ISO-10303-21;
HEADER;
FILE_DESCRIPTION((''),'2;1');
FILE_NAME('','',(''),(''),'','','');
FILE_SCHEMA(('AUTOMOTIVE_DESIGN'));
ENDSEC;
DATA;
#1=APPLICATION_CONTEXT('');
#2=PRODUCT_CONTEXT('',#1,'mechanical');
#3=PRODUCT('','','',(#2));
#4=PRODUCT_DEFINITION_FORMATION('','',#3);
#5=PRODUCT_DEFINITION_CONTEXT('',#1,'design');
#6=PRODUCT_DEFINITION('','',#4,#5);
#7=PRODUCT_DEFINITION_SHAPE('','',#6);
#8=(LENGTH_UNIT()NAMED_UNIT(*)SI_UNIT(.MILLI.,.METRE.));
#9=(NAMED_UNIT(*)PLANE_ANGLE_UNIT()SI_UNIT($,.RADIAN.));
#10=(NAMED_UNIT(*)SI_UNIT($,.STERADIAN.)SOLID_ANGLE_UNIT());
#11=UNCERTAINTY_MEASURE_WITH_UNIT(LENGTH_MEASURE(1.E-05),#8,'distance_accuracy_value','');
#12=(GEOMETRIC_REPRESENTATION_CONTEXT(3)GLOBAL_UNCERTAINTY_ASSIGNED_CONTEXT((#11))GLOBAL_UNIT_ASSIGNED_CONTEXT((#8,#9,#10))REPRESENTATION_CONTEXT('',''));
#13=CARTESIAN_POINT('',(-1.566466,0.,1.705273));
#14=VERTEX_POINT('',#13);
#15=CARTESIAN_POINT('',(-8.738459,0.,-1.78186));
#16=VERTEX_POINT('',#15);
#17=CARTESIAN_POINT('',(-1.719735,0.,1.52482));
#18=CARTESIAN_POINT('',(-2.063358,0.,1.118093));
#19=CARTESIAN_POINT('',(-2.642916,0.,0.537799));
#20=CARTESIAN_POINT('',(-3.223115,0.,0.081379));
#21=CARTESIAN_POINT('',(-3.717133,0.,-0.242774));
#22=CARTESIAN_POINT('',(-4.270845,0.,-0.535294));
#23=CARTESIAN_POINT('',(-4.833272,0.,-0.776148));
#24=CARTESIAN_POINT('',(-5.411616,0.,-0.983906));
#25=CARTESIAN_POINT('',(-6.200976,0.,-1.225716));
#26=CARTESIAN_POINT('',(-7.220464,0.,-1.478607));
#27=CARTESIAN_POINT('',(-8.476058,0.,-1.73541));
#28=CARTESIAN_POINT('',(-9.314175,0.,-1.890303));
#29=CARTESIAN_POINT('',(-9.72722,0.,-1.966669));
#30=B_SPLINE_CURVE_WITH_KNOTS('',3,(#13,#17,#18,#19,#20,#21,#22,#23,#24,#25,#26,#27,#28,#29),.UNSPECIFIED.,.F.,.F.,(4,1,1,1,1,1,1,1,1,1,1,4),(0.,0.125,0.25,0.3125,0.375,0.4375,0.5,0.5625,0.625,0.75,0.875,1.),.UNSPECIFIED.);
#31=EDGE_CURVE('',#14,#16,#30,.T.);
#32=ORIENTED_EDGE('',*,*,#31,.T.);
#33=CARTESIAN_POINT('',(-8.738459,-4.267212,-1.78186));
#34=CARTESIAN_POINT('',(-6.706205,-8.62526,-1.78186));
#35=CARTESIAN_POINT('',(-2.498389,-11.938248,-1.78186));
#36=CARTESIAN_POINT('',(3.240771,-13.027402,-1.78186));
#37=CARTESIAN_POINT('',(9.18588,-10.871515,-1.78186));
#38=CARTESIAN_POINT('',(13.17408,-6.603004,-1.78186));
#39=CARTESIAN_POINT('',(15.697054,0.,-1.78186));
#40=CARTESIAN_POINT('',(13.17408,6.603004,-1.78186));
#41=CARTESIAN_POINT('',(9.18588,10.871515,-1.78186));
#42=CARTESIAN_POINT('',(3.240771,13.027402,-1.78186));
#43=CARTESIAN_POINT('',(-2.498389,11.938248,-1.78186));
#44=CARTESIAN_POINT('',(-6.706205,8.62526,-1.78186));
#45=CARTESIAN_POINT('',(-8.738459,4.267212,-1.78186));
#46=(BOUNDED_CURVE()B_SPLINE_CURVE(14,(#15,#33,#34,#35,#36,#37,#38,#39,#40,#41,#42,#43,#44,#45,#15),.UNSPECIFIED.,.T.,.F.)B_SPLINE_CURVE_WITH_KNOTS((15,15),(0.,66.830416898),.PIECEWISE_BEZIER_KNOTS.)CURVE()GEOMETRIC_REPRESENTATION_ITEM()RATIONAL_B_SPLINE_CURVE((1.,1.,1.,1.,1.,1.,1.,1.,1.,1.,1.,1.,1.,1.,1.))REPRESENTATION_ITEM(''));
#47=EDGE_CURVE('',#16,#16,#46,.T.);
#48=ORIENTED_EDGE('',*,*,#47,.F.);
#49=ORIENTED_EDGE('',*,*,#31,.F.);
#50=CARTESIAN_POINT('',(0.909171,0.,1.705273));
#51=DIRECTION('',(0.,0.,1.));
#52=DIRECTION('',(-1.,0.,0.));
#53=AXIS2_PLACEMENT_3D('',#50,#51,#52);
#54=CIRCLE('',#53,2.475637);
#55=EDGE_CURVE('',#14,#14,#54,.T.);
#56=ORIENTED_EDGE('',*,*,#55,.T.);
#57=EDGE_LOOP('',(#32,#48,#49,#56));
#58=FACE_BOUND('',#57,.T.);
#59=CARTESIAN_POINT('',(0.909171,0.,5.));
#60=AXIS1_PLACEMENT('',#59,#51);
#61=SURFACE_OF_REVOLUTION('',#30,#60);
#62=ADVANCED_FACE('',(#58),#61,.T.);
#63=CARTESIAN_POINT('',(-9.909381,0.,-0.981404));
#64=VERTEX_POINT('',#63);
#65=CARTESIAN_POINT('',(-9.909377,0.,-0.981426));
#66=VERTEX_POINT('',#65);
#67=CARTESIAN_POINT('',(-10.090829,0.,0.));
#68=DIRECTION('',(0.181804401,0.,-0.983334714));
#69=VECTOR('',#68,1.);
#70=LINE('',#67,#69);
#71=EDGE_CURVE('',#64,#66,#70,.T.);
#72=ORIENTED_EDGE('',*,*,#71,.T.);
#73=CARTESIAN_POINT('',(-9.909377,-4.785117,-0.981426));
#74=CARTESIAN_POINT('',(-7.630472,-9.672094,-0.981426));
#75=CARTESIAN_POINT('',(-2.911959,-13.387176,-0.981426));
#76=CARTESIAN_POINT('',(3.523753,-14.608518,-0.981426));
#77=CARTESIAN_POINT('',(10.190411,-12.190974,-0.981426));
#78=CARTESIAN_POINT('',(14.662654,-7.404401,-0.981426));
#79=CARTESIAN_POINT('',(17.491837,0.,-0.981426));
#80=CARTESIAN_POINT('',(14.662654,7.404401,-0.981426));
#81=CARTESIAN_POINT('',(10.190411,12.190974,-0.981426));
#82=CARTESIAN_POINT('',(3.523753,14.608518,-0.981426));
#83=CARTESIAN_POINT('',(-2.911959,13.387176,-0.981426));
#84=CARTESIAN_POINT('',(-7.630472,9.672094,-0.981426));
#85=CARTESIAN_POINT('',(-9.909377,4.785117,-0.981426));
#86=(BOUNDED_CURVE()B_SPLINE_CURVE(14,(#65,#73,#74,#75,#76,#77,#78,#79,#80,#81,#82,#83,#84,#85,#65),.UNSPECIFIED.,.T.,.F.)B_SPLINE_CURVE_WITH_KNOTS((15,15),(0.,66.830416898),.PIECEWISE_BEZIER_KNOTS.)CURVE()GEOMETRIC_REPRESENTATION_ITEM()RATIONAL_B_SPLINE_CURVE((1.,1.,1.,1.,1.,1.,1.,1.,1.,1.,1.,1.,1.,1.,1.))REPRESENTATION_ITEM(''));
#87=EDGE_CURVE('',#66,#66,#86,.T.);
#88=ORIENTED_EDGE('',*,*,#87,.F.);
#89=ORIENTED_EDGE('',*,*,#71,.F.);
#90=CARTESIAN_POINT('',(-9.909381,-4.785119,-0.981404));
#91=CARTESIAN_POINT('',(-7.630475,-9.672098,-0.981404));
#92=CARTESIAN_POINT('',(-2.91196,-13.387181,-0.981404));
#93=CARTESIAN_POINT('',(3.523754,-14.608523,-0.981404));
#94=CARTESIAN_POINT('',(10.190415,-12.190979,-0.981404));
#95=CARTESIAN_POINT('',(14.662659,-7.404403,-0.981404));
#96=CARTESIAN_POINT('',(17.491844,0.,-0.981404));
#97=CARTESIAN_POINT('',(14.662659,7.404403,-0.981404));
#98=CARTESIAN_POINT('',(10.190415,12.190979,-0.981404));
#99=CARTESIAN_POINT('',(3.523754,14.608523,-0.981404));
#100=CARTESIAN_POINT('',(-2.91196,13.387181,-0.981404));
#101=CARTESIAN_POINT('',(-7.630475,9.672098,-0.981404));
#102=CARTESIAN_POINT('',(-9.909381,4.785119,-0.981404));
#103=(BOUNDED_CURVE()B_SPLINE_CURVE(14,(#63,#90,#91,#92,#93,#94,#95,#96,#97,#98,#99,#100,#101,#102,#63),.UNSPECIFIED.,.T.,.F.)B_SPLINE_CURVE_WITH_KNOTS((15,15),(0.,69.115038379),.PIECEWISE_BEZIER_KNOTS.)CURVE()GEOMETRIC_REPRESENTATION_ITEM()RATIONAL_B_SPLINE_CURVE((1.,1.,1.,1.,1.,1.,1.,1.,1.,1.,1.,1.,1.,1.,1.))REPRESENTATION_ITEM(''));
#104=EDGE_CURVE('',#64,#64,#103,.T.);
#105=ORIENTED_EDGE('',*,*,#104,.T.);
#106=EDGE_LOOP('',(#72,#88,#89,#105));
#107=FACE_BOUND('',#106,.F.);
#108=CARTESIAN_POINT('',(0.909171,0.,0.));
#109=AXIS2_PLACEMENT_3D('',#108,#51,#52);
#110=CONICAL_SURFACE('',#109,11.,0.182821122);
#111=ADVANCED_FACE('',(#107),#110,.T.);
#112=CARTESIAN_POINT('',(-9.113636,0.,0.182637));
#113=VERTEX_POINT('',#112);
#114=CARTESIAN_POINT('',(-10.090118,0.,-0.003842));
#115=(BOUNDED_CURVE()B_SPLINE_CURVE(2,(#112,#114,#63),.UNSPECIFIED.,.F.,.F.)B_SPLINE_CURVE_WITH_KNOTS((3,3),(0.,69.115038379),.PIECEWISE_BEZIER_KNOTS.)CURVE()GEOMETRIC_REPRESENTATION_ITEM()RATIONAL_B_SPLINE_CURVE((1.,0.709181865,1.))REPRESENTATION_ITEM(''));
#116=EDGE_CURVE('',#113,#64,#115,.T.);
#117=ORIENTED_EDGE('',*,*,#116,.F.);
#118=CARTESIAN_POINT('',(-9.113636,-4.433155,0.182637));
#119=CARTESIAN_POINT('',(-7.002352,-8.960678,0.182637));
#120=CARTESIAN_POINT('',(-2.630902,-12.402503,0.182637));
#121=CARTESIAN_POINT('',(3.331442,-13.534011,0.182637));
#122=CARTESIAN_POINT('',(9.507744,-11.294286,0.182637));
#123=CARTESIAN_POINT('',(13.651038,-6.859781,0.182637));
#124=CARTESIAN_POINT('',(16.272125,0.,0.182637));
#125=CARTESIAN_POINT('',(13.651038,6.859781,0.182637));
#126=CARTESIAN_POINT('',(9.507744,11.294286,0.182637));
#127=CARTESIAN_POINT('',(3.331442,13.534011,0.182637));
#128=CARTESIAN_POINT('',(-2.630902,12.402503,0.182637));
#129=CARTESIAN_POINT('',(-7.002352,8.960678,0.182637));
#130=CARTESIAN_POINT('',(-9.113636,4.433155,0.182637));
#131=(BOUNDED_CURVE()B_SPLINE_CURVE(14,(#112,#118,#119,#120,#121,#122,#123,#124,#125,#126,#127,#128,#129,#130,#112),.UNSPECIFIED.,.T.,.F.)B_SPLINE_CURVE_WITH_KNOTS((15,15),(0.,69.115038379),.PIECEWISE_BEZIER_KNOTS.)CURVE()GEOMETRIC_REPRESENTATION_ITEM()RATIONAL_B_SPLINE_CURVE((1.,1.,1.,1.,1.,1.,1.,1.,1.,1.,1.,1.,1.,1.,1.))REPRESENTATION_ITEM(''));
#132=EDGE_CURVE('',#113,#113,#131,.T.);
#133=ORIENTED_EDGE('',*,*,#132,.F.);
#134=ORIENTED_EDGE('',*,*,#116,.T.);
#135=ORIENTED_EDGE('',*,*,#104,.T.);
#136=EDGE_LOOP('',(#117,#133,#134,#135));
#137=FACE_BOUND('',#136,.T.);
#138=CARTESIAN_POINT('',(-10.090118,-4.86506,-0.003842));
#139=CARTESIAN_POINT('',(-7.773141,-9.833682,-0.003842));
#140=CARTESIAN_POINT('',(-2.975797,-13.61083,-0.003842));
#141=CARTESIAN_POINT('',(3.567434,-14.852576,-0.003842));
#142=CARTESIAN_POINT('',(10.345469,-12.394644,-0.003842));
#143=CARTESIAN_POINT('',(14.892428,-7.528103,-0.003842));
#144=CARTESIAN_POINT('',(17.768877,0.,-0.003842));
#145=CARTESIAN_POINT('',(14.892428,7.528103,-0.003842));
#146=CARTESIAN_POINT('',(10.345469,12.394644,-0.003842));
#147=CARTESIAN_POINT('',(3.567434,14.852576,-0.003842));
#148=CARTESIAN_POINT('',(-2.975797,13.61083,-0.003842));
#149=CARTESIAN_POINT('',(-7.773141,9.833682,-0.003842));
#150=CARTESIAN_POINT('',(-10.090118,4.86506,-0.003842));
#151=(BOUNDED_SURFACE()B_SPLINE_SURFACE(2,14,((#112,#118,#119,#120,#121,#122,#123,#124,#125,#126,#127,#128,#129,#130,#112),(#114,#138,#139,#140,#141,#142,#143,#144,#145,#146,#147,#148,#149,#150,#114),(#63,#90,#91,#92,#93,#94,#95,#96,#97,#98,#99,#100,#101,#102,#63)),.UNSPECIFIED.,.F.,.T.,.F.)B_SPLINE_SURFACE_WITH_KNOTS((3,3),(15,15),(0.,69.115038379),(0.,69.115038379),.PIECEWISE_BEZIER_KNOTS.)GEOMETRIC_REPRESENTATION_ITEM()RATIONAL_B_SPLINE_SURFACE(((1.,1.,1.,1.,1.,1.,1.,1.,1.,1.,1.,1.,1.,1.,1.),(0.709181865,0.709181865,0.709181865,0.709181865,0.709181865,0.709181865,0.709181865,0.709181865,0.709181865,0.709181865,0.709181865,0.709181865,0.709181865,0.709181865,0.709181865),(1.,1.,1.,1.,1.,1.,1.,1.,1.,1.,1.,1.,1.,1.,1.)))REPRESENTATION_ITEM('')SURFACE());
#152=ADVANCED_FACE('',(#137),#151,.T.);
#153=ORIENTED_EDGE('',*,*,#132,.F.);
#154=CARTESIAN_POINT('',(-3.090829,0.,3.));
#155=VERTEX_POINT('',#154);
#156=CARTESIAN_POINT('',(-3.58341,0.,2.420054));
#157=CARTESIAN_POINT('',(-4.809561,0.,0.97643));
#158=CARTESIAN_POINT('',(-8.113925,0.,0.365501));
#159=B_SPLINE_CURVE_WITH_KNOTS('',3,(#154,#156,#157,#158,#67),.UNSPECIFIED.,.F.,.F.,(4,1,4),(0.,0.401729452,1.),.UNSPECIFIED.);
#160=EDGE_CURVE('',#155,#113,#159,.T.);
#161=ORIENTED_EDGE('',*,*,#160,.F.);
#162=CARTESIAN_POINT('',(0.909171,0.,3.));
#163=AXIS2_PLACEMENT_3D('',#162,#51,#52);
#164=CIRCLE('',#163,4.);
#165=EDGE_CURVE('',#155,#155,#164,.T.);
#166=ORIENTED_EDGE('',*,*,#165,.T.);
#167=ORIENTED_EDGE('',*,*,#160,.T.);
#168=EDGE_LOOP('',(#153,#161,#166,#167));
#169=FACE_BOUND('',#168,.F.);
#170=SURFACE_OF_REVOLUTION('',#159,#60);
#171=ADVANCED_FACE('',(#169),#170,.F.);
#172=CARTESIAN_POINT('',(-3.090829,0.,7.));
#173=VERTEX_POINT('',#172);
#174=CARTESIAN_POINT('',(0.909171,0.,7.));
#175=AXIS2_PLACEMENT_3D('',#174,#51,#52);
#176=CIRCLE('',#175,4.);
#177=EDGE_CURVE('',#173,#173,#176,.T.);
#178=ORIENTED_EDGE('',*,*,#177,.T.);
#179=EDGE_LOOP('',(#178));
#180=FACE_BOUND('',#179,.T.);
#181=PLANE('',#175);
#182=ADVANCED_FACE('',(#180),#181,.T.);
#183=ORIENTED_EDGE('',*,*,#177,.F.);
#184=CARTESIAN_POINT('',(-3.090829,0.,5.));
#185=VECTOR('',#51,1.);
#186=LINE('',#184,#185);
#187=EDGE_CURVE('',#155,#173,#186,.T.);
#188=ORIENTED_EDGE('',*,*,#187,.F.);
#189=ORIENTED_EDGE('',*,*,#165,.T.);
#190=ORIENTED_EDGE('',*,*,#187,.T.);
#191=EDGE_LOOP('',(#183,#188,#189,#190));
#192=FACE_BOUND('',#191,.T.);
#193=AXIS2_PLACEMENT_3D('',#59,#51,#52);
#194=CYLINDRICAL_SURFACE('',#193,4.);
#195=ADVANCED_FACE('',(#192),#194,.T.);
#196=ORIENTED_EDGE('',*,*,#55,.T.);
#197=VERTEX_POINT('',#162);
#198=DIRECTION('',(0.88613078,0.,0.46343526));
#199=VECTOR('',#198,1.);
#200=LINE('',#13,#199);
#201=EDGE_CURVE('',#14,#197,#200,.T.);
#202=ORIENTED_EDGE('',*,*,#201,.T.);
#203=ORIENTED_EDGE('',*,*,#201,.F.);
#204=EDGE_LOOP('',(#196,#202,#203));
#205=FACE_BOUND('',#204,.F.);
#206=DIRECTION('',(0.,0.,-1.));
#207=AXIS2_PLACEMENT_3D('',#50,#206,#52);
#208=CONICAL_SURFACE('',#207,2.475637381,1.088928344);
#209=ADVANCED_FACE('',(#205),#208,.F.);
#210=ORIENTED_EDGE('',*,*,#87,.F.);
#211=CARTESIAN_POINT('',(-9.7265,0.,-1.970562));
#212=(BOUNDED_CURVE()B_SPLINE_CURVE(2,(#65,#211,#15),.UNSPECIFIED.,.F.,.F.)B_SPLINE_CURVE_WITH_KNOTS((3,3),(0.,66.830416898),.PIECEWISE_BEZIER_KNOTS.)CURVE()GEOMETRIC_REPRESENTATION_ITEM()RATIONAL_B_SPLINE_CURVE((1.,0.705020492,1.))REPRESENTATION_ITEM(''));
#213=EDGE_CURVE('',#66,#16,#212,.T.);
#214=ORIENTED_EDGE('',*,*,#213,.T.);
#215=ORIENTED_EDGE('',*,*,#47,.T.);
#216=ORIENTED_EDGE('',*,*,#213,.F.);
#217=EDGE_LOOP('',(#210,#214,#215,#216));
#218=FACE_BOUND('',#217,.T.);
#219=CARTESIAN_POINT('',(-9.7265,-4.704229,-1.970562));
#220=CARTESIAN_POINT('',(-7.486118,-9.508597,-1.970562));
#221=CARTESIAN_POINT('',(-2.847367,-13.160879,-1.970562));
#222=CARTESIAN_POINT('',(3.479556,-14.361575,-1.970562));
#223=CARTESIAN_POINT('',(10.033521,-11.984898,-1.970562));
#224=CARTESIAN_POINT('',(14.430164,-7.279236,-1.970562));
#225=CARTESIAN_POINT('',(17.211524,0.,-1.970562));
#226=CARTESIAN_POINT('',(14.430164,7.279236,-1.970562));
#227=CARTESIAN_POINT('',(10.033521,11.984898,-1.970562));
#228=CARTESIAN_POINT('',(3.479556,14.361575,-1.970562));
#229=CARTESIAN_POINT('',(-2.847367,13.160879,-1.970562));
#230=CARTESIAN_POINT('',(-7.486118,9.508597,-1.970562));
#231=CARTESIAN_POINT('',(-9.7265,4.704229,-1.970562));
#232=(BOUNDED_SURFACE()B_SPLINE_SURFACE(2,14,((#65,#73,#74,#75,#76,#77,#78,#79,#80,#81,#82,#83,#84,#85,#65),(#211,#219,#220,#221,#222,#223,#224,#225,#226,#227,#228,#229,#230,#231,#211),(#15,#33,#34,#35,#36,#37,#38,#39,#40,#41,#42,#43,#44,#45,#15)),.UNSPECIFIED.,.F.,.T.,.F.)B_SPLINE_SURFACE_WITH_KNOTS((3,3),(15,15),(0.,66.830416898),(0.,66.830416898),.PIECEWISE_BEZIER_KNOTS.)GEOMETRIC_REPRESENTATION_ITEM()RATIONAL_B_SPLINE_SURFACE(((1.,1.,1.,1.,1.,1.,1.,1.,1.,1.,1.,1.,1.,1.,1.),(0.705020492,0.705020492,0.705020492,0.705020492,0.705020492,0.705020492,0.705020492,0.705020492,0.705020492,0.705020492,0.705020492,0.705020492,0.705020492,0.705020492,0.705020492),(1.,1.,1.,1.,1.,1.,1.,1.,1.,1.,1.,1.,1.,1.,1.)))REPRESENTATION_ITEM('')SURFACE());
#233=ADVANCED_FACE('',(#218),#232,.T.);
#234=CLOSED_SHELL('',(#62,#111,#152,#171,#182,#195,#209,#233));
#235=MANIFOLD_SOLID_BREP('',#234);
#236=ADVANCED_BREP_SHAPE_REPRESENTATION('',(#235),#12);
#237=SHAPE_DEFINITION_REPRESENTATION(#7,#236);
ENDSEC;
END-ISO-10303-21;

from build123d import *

# Parameters (mm, degrees)
F0_W = 4
F0_H = 4
F2_R = 0.99999


# Not quite as in the source:
# - a fillet or chamfer is up to 0.001 mm smaller than in the source, because OpenCascade refuses the exact size
# - the dataset's text gives a spline's control points without its knots; the knots are read off the source's solid


with BuildPart() as f1:
    # F0 (on Front) → F1 (revolve)
    with BuildSketch(Plane.XZ):
        with BuildLine():
            Line((0.9091711268, 3), (-3.0908288732, 3))
            add(Edge.make_bspline(
                [(-3.0908288732, 3), (-3.5834098611, 2.4200538723), (-4.8095609066, 0.976430248), (-8.1139250982, 0.3655009849), (-10.0908288732, 0)],
                knots=[0, 0, 0, 0, 0.4017294522, 1, 1, 1, 1], degree=3))
            Line((-10.0908288732, 0), (-9.7272200714, -1.9666694281))
            add(Edge.make_bspline(
                [(-1.5664662541, 1.7052727679), (-1.7197351348, 1.5248198149), (-2.063357916, 1.1180932901), (-2.6429158857, 0.5377987308), (-3.2231154482, 0.0813793664), (-3.7171330132, -0.2427740222), (-4.2708452388, -0.5352938299), (-4.8332722817, -0.7761481117), (-5.411616192, -0.9839057168), (-6.200976021, -1.2257159643), (-7.2204637167, -1.4786072566), (-8.4760577728, -1.735410051), (-9.3141745474, -1.8903032702), (-9.7272200714, -1.9666694281)],
                knots=[0, 0, 0, 0, 0.125, 0.25, 0.3125, 0.375, 0.4375, 0.5, 0.5625, 0.625, 0.75, 0.875, 1, 1, 1, 1], degree=3))
            Line((-1.5664662541, 1.7052727679), (0.9091711268, 3))
        make_face()
        with Locations((-1.0908288732, 5)):
            Rectangle(F0_W, F0_H)
    revolve(axis=Axis((0.9091711268, 0, 5), (0, 0, 1)))

    # F2 (radius 1 in the source; OpenCascade refuses exactly that, so slightly less here)
    f2_edges = [f1.edges().sort_by_distance(p)[0] for p in [
        (11.545562, 0, -1.966669),
        (11.909171, 0, 0),
    ]]
    fillet(f2_edges, radius=F2_R)


solid = f1.part
